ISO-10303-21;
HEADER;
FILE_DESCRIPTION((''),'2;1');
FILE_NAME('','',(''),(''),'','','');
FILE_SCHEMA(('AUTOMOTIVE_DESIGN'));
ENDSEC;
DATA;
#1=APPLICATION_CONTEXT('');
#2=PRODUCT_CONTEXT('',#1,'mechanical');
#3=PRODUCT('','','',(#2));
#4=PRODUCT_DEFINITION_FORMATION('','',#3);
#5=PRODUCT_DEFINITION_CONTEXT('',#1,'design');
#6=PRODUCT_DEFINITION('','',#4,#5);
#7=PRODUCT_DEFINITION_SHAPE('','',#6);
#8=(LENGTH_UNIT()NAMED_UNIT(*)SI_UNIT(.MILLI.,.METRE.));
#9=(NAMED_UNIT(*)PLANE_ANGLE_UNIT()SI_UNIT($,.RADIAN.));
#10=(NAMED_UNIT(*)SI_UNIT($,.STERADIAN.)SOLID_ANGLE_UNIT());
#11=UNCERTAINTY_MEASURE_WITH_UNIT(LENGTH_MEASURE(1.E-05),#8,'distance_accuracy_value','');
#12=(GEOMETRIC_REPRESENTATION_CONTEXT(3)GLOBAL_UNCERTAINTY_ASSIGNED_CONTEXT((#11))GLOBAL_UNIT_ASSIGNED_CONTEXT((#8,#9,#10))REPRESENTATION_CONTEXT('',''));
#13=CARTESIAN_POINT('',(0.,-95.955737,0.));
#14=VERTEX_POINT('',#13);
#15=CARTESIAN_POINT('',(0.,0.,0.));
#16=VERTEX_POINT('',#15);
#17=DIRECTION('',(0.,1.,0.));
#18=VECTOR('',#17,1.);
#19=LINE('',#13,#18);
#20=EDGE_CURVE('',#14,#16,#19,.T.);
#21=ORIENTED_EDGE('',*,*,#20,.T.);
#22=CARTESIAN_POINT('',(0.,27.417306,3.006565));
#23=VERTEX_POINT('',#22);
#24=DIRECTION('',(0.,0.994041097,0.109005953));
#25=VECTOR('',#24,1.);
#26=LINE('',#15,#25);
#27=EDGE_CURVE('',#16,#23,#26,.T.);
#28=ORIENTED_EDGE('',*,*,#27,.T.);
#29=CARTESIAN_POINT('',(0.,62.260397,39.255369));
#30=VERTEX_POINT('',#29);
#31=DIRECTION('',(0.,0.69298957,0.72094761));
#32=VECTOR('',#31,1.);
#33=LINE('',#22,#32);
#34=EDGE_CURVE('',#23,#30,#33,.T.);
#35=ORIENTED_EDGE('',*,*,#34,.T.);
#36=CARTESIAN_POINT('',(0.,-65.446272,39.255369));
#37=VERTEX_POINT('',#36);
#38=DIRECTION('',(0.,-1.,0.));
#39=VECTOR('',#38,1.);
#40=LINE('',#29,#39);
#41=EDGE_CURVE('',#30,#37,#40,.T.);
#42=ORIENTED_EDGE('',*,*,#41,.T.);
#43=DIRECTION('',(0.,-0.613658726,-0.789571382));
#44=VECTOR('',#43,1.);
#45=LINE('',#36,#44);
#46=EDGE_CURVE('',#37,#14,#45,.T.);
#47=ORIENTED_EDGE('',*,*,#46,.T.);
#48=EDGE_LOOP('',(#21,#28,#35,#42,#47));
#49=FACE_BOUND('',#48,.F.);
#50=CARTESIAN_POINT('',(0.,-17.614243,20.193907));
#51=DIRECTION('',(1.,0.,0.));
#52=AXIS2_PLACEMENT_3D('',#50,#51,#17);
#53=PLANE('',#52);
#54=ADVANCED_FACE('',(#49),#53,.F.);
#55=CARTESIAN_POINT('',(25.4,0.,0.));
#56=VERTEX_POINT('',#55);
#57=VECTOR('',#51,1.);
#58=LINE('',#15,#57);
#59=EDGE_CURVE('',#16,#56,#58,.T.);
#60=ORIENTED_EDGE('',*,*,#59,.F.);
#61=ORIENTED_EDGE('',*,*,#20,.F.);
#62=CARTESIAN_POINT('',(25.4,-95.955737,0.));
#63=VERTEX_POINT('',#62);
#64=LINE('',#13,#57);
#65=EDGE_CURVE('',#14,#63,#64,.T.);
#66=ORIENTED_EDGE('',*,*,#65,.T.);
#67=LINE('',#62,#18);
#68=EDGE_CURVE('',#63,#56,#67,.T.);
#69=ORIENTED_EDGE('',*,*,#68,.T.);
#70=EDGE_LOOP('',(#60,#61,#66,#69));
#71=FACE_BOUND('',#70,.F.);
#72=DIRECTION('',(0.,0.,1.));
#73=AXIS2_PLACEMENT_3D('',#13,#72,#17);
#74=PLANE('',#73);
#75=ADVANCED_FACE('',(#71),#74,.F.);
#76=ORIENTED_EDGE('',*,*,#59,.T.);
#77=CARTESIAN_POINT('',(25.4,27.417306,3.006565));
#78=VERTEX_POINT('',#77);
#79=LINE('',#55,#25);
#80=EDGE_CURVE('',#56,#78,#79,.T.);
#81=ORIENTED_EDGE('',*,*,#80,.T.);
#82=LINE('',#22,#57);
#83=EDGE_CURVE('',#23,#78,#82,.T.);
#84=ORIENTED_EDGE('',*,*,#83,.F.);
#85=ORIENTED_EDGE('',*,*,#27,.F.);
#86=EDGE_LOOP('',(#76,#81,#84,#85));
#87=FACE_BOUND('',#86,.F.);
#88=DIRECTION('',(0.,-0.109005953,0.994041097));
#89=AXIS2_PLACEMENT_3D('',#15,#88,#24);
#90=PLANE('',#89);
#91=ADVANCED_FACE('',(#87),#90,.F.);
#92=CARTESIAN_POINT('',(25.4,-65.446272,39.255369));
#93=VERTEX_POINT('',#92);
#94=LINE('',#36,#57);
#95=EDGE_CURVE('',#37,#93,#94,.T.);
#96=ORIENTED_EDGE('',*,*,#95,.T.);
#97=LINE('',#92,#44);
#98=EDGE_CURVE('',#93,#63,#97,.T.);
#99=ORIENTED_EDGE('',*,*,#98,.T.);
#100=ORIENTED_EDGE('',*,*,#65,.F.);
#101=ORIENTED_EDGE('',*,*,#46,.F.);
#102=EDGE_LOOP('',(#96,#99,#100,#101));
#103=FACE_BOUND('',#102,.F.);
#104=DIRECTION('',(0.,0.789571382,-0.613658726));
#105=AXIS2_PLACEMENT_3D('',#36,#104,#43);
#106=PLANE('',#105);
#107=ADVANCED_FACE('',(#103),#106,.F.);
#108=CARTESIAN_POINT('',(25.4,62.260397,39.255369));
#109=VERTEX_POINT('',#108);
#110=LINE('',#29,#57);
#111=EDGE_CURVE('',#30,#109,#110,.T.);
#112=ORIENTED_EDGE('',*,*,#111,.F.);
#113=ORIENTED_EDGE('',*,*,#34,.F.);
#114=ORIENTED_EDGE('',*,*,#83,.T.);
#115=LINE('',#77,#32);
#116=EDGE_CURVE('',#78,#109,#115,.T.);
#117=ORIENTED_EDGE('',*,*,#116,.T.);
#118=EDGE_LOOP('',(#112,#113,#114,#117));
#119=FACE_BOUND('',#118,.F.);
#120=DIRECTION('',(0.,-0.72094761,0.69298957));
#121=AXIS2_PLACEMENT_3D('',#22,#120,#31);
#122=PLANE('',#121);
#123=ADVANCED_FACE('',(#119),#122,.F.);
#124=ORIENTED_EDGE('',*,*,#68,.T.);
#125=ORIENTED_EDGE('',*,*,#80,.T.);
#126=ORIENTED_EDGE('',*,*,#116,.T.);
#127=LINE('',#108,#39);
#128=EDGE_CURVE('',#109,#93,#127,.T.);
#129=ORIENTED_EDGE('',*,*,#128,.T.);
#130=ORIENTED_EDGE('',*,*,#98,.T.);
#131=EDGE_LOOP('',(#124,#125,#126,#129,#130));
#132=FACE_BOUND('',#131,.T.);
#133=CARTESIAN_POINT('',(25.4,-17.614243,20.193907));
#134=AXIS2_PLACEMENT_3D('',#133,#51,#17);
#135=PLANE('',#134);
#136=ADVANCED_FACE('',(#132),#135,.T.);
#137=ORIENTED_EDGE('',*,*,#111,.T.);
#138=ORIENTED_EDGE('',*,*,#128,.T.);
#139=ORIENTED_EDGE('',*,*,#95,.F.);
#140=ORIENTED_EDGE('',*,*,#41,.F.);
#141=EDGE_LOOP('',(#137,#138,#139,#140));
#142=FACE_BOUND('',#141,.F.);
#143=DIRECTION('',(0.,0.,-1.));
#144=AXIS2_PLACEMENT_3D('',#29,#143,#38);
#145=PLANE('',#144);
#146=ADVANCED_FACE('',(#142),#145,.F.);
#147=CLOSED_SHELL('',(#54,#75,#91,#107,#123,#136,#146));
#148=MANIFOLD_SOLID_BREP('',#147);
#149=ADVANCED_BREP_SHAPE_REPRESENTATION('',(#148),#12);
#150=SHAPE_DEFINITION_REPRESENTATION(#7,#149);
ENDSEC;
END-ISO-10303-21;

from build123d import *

# Parameters (mm, degrees)
F3_DEPTH = 25.4


# Not quite as in the source:
# - the program builds the solid bodies; features that only make, move or delete a surface that nothing else refers to are left out


with BuildPart() as f3:
    # F2 (on Right) → F3 (new body)
    with BuildSketch(Plane.YZ):
        Polygon((62.2603967786, 39.2553694546), (-65.4462724924, 39.2553694546), (-95.9557369351, 0), (0, 0), (27.4173058569, 3.0065653846), align=None)
    extrude(amount=F3_DEPTH)


solid = f3.part
